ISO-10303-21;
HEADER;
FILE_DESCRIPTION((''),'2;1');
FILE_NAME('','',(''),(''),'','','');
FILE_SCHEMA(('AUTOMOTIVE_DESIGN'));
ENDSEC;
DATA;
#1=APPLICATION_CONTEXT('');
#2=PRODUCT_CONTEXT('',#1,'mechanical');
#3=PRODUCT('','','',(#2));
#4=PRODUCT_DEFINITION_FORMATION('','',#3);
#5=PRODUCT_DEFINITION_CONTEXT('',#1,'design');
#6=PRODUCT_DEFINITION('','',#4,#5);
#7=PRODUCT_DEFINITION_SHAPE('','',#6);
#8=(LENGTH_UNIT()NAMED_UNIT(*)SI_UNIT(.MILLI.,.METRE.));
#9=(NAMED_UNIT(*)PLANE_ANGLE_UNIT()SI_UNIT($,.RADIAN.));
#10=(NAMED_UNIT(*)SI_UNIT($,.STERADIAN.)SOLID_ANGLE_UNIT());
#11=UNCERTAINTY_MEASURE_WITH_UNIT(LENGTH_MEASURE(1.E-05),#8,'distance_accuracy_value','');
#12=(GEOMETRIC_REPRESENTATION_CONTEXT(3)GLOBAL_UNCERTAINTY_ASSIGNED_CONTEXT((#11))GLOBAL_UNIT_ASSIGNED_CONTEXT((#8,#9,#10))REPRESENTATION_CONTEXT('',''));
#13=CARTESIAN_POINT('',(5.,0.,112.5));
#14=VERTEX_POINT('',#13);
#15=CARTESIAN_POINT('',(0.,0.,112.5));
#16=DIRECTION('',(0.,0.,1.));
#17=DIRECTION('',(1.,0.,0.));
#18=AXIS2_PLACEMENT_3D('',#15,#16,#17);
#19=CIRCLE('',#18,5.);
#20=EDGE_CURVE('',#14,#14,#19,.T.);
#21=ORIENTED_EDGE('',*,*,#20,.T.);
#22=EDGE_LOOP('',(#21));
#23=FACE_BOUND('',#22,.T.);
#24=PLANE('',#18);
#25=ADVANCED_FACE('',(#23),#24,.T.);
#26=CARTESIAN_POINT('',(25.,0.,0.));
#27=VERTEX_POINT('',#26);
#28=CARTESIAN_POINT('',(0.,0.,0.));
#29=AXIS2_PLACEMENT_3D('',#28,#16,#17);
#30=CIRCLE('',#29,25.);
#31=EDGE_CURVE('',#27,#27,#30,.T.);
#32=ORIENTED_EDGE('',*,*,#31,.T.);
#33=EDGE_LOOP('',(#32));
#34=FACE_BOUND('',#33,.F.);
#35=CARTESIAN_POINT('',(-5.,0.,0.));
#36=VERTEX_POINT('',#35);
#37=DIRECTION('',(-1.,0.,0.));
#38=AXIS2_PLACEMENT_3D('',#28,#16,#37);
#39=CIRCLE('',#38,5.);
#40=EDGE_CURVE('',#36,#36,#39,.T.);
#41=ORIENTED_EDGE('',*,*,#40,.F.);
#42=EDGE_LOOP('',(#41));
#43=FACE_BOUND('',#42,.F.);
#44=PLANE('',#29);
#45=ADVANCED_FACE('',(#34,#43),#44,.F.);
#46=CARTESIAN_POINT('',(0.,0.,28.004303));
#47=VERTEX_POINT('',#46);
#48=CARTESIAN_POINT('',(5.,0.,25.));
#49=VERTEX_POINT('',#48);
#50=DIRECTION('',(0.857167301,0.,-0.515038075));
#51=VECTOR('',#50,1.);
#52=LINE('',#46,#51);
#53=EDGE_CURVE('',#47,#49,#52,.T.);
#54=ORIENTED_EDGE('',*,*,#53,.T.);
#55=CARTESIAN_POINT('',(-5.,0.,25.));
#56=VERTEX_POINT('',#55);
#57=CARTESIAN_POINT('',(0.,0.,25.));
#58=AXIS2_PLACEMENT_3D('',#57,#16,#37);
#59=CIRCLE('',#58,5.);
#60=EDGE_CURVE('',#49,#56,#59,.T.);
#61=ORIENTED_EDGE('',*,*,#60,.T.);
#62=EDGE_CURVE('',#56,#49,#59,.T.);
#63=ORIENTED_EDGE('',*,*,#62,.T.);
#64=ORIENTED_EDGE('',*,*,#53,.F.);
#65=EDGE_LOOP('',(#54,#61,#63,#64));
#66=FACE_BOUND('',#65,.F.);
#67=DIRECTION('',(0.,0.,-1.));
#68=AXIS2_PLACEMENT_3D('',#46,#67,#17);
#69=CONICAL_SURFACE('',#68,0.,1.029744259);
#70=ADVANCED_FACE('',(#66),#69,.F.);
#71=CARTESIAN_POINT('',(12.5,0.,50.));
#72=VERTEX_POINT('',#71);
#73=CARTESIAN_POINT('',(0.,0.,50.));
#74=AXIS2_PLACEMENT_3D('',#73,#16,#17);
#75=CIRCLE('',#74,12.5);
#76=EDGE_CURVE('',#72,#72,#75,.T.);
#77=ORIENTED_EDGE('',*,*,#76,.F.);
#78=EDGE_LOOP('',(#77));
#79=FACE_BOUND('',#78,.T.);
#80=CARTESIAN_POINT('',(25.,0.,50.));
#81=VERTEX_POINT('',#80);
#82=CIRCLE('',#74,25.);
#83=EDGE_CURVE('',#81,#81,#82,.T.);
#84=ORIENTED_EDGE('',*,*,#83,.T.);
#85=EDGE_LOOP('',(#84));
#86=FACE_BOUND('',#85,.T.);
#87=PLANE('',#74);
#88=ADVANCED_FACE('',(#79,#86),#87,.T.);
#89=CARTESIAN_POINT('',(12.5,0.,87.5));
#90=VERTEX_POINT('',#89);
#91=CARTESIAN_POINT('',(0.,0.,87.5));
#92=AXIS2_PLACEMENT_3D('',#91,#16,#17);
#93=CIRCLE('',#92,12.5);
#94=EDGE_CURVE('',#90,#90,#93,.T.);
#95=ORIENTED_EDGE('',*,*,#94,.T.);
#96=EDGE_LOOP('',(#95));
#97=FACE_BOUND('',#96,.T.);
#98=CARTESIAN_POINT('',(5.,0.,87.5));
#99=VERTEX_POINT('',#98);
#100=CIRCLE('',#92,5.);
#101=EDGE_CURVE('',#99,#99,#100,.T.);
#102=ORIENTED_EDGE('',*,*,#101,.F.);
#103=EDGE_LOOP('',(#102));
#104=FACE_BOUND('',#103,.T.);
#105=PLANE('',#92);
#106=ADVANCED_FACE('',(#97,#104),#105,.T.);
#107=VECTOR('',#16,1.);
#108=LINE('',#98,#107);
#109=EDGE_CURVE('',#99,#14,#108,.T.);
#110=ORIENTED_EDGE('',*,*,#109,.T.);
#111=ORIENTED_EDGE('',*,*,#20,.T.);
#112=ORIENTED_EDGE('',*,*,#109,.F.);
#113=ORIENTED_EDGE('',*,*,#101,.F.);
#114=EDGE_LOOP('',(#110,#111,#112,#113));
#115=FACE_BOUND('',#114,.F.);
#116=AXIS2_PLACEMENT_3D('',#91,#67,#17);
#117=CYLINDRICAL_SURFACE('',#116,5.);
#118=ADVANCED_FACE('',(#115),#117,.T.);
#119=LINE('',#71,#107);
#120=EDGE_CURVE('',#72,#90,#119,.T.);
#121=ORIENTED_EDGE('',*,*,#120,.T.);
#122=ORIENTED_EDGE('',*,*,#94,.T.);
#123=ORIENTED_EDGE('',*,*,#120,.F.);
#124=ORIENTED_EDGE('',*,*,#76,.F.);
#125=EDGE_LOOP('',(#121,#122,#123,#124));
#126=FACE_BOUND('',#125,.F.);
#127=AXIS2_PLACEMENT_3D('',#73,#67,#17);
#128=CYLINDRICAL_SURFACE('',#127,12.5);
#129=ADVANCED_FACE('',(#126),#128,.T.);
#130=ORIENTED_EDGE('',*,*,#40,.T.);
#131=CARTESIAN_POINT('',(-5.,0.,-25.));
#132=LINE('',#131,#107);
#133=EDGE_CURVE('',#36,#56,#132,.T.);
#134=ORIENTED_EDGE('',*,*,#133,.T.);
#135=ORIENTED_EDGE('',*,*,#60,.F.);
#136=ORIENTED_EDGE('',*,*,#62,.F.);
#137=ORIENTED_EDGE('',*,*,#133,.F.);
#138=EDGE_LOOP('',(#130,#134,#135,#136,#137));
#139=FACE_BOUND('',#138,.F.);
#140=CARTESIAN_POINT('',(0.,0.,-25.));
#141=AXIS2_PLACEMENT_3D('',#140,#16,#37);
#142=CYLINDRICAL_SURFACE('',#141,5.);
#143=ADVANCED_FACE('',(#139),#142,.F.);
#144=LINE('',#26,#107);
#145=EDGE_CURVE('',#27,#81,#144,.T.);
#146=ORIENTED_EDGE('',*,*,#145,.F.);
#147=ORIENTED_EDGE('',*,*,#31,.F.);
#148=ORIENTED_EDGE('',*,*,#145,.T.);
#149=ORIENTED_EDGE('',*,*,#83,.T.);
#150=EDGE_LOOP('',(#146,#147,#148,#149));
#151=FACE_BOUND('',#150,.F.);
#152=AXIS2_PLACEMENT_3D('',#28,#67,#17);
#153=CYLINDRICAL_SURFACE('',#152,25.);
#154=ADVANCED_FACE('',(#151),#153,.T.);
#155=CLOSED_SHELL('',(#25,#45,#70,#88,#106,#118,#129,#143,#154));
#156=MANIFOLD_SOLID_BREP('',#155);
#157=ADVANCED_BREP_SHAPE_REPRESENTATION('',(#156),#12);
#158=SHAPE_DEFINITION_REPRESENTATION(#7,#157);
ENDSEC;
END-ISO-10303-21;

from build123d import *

# Parameters (mm, degrees)
F0_R      = 25
F2_DEPTH  = 50
F3_R      = 12.5
F4_DEPTH  = 37.5
F10_D     = 10
F10_DEPTH = 25
F10_TIP   = 3.0043030951
F11_R     = 5
F12_DEPTH = 25


# Not quite as in the source:
# - a feature of the source that left no trace in its solid (it failed there, or was rolled back) is left out


with BuildPart() as f2:
    # F0 (on Top) → F2 (new body)
    with BuildSketch(Plane.XY):
        Circle(F0_R)
    extrude(amount=F2_DEPTH)

    # F3 (on face) → F4 (join)
    with BuildSketch(Plane.XY.offset(50)):
        Circle(F3_R)
    extrude(amount=F4_DEPTH)

    # F10
    with Locations(Plane(origin=(0, 0, 0), x_dir=(1, 0, 0), z_dir=(0, 0, -1))):
        with Locations((0, 0)):
            Hole(F10_D / 2, depth=F10_DEPTH)
            with Locations((0, 0, -(F10_DEPTH + F10_TIP / 2))):  # 118° drill point
                Cone(0, F10_D / 2, F10_TIP, mode=Mode.SUBTRACT)

    # F11 (on face) → F12 (join)
    with BuildSketch(Plane.XY.offset(87.5)):
        Circle(F11_R)
    extrude(amount=F12_DEPTH)


solid = f2.part
